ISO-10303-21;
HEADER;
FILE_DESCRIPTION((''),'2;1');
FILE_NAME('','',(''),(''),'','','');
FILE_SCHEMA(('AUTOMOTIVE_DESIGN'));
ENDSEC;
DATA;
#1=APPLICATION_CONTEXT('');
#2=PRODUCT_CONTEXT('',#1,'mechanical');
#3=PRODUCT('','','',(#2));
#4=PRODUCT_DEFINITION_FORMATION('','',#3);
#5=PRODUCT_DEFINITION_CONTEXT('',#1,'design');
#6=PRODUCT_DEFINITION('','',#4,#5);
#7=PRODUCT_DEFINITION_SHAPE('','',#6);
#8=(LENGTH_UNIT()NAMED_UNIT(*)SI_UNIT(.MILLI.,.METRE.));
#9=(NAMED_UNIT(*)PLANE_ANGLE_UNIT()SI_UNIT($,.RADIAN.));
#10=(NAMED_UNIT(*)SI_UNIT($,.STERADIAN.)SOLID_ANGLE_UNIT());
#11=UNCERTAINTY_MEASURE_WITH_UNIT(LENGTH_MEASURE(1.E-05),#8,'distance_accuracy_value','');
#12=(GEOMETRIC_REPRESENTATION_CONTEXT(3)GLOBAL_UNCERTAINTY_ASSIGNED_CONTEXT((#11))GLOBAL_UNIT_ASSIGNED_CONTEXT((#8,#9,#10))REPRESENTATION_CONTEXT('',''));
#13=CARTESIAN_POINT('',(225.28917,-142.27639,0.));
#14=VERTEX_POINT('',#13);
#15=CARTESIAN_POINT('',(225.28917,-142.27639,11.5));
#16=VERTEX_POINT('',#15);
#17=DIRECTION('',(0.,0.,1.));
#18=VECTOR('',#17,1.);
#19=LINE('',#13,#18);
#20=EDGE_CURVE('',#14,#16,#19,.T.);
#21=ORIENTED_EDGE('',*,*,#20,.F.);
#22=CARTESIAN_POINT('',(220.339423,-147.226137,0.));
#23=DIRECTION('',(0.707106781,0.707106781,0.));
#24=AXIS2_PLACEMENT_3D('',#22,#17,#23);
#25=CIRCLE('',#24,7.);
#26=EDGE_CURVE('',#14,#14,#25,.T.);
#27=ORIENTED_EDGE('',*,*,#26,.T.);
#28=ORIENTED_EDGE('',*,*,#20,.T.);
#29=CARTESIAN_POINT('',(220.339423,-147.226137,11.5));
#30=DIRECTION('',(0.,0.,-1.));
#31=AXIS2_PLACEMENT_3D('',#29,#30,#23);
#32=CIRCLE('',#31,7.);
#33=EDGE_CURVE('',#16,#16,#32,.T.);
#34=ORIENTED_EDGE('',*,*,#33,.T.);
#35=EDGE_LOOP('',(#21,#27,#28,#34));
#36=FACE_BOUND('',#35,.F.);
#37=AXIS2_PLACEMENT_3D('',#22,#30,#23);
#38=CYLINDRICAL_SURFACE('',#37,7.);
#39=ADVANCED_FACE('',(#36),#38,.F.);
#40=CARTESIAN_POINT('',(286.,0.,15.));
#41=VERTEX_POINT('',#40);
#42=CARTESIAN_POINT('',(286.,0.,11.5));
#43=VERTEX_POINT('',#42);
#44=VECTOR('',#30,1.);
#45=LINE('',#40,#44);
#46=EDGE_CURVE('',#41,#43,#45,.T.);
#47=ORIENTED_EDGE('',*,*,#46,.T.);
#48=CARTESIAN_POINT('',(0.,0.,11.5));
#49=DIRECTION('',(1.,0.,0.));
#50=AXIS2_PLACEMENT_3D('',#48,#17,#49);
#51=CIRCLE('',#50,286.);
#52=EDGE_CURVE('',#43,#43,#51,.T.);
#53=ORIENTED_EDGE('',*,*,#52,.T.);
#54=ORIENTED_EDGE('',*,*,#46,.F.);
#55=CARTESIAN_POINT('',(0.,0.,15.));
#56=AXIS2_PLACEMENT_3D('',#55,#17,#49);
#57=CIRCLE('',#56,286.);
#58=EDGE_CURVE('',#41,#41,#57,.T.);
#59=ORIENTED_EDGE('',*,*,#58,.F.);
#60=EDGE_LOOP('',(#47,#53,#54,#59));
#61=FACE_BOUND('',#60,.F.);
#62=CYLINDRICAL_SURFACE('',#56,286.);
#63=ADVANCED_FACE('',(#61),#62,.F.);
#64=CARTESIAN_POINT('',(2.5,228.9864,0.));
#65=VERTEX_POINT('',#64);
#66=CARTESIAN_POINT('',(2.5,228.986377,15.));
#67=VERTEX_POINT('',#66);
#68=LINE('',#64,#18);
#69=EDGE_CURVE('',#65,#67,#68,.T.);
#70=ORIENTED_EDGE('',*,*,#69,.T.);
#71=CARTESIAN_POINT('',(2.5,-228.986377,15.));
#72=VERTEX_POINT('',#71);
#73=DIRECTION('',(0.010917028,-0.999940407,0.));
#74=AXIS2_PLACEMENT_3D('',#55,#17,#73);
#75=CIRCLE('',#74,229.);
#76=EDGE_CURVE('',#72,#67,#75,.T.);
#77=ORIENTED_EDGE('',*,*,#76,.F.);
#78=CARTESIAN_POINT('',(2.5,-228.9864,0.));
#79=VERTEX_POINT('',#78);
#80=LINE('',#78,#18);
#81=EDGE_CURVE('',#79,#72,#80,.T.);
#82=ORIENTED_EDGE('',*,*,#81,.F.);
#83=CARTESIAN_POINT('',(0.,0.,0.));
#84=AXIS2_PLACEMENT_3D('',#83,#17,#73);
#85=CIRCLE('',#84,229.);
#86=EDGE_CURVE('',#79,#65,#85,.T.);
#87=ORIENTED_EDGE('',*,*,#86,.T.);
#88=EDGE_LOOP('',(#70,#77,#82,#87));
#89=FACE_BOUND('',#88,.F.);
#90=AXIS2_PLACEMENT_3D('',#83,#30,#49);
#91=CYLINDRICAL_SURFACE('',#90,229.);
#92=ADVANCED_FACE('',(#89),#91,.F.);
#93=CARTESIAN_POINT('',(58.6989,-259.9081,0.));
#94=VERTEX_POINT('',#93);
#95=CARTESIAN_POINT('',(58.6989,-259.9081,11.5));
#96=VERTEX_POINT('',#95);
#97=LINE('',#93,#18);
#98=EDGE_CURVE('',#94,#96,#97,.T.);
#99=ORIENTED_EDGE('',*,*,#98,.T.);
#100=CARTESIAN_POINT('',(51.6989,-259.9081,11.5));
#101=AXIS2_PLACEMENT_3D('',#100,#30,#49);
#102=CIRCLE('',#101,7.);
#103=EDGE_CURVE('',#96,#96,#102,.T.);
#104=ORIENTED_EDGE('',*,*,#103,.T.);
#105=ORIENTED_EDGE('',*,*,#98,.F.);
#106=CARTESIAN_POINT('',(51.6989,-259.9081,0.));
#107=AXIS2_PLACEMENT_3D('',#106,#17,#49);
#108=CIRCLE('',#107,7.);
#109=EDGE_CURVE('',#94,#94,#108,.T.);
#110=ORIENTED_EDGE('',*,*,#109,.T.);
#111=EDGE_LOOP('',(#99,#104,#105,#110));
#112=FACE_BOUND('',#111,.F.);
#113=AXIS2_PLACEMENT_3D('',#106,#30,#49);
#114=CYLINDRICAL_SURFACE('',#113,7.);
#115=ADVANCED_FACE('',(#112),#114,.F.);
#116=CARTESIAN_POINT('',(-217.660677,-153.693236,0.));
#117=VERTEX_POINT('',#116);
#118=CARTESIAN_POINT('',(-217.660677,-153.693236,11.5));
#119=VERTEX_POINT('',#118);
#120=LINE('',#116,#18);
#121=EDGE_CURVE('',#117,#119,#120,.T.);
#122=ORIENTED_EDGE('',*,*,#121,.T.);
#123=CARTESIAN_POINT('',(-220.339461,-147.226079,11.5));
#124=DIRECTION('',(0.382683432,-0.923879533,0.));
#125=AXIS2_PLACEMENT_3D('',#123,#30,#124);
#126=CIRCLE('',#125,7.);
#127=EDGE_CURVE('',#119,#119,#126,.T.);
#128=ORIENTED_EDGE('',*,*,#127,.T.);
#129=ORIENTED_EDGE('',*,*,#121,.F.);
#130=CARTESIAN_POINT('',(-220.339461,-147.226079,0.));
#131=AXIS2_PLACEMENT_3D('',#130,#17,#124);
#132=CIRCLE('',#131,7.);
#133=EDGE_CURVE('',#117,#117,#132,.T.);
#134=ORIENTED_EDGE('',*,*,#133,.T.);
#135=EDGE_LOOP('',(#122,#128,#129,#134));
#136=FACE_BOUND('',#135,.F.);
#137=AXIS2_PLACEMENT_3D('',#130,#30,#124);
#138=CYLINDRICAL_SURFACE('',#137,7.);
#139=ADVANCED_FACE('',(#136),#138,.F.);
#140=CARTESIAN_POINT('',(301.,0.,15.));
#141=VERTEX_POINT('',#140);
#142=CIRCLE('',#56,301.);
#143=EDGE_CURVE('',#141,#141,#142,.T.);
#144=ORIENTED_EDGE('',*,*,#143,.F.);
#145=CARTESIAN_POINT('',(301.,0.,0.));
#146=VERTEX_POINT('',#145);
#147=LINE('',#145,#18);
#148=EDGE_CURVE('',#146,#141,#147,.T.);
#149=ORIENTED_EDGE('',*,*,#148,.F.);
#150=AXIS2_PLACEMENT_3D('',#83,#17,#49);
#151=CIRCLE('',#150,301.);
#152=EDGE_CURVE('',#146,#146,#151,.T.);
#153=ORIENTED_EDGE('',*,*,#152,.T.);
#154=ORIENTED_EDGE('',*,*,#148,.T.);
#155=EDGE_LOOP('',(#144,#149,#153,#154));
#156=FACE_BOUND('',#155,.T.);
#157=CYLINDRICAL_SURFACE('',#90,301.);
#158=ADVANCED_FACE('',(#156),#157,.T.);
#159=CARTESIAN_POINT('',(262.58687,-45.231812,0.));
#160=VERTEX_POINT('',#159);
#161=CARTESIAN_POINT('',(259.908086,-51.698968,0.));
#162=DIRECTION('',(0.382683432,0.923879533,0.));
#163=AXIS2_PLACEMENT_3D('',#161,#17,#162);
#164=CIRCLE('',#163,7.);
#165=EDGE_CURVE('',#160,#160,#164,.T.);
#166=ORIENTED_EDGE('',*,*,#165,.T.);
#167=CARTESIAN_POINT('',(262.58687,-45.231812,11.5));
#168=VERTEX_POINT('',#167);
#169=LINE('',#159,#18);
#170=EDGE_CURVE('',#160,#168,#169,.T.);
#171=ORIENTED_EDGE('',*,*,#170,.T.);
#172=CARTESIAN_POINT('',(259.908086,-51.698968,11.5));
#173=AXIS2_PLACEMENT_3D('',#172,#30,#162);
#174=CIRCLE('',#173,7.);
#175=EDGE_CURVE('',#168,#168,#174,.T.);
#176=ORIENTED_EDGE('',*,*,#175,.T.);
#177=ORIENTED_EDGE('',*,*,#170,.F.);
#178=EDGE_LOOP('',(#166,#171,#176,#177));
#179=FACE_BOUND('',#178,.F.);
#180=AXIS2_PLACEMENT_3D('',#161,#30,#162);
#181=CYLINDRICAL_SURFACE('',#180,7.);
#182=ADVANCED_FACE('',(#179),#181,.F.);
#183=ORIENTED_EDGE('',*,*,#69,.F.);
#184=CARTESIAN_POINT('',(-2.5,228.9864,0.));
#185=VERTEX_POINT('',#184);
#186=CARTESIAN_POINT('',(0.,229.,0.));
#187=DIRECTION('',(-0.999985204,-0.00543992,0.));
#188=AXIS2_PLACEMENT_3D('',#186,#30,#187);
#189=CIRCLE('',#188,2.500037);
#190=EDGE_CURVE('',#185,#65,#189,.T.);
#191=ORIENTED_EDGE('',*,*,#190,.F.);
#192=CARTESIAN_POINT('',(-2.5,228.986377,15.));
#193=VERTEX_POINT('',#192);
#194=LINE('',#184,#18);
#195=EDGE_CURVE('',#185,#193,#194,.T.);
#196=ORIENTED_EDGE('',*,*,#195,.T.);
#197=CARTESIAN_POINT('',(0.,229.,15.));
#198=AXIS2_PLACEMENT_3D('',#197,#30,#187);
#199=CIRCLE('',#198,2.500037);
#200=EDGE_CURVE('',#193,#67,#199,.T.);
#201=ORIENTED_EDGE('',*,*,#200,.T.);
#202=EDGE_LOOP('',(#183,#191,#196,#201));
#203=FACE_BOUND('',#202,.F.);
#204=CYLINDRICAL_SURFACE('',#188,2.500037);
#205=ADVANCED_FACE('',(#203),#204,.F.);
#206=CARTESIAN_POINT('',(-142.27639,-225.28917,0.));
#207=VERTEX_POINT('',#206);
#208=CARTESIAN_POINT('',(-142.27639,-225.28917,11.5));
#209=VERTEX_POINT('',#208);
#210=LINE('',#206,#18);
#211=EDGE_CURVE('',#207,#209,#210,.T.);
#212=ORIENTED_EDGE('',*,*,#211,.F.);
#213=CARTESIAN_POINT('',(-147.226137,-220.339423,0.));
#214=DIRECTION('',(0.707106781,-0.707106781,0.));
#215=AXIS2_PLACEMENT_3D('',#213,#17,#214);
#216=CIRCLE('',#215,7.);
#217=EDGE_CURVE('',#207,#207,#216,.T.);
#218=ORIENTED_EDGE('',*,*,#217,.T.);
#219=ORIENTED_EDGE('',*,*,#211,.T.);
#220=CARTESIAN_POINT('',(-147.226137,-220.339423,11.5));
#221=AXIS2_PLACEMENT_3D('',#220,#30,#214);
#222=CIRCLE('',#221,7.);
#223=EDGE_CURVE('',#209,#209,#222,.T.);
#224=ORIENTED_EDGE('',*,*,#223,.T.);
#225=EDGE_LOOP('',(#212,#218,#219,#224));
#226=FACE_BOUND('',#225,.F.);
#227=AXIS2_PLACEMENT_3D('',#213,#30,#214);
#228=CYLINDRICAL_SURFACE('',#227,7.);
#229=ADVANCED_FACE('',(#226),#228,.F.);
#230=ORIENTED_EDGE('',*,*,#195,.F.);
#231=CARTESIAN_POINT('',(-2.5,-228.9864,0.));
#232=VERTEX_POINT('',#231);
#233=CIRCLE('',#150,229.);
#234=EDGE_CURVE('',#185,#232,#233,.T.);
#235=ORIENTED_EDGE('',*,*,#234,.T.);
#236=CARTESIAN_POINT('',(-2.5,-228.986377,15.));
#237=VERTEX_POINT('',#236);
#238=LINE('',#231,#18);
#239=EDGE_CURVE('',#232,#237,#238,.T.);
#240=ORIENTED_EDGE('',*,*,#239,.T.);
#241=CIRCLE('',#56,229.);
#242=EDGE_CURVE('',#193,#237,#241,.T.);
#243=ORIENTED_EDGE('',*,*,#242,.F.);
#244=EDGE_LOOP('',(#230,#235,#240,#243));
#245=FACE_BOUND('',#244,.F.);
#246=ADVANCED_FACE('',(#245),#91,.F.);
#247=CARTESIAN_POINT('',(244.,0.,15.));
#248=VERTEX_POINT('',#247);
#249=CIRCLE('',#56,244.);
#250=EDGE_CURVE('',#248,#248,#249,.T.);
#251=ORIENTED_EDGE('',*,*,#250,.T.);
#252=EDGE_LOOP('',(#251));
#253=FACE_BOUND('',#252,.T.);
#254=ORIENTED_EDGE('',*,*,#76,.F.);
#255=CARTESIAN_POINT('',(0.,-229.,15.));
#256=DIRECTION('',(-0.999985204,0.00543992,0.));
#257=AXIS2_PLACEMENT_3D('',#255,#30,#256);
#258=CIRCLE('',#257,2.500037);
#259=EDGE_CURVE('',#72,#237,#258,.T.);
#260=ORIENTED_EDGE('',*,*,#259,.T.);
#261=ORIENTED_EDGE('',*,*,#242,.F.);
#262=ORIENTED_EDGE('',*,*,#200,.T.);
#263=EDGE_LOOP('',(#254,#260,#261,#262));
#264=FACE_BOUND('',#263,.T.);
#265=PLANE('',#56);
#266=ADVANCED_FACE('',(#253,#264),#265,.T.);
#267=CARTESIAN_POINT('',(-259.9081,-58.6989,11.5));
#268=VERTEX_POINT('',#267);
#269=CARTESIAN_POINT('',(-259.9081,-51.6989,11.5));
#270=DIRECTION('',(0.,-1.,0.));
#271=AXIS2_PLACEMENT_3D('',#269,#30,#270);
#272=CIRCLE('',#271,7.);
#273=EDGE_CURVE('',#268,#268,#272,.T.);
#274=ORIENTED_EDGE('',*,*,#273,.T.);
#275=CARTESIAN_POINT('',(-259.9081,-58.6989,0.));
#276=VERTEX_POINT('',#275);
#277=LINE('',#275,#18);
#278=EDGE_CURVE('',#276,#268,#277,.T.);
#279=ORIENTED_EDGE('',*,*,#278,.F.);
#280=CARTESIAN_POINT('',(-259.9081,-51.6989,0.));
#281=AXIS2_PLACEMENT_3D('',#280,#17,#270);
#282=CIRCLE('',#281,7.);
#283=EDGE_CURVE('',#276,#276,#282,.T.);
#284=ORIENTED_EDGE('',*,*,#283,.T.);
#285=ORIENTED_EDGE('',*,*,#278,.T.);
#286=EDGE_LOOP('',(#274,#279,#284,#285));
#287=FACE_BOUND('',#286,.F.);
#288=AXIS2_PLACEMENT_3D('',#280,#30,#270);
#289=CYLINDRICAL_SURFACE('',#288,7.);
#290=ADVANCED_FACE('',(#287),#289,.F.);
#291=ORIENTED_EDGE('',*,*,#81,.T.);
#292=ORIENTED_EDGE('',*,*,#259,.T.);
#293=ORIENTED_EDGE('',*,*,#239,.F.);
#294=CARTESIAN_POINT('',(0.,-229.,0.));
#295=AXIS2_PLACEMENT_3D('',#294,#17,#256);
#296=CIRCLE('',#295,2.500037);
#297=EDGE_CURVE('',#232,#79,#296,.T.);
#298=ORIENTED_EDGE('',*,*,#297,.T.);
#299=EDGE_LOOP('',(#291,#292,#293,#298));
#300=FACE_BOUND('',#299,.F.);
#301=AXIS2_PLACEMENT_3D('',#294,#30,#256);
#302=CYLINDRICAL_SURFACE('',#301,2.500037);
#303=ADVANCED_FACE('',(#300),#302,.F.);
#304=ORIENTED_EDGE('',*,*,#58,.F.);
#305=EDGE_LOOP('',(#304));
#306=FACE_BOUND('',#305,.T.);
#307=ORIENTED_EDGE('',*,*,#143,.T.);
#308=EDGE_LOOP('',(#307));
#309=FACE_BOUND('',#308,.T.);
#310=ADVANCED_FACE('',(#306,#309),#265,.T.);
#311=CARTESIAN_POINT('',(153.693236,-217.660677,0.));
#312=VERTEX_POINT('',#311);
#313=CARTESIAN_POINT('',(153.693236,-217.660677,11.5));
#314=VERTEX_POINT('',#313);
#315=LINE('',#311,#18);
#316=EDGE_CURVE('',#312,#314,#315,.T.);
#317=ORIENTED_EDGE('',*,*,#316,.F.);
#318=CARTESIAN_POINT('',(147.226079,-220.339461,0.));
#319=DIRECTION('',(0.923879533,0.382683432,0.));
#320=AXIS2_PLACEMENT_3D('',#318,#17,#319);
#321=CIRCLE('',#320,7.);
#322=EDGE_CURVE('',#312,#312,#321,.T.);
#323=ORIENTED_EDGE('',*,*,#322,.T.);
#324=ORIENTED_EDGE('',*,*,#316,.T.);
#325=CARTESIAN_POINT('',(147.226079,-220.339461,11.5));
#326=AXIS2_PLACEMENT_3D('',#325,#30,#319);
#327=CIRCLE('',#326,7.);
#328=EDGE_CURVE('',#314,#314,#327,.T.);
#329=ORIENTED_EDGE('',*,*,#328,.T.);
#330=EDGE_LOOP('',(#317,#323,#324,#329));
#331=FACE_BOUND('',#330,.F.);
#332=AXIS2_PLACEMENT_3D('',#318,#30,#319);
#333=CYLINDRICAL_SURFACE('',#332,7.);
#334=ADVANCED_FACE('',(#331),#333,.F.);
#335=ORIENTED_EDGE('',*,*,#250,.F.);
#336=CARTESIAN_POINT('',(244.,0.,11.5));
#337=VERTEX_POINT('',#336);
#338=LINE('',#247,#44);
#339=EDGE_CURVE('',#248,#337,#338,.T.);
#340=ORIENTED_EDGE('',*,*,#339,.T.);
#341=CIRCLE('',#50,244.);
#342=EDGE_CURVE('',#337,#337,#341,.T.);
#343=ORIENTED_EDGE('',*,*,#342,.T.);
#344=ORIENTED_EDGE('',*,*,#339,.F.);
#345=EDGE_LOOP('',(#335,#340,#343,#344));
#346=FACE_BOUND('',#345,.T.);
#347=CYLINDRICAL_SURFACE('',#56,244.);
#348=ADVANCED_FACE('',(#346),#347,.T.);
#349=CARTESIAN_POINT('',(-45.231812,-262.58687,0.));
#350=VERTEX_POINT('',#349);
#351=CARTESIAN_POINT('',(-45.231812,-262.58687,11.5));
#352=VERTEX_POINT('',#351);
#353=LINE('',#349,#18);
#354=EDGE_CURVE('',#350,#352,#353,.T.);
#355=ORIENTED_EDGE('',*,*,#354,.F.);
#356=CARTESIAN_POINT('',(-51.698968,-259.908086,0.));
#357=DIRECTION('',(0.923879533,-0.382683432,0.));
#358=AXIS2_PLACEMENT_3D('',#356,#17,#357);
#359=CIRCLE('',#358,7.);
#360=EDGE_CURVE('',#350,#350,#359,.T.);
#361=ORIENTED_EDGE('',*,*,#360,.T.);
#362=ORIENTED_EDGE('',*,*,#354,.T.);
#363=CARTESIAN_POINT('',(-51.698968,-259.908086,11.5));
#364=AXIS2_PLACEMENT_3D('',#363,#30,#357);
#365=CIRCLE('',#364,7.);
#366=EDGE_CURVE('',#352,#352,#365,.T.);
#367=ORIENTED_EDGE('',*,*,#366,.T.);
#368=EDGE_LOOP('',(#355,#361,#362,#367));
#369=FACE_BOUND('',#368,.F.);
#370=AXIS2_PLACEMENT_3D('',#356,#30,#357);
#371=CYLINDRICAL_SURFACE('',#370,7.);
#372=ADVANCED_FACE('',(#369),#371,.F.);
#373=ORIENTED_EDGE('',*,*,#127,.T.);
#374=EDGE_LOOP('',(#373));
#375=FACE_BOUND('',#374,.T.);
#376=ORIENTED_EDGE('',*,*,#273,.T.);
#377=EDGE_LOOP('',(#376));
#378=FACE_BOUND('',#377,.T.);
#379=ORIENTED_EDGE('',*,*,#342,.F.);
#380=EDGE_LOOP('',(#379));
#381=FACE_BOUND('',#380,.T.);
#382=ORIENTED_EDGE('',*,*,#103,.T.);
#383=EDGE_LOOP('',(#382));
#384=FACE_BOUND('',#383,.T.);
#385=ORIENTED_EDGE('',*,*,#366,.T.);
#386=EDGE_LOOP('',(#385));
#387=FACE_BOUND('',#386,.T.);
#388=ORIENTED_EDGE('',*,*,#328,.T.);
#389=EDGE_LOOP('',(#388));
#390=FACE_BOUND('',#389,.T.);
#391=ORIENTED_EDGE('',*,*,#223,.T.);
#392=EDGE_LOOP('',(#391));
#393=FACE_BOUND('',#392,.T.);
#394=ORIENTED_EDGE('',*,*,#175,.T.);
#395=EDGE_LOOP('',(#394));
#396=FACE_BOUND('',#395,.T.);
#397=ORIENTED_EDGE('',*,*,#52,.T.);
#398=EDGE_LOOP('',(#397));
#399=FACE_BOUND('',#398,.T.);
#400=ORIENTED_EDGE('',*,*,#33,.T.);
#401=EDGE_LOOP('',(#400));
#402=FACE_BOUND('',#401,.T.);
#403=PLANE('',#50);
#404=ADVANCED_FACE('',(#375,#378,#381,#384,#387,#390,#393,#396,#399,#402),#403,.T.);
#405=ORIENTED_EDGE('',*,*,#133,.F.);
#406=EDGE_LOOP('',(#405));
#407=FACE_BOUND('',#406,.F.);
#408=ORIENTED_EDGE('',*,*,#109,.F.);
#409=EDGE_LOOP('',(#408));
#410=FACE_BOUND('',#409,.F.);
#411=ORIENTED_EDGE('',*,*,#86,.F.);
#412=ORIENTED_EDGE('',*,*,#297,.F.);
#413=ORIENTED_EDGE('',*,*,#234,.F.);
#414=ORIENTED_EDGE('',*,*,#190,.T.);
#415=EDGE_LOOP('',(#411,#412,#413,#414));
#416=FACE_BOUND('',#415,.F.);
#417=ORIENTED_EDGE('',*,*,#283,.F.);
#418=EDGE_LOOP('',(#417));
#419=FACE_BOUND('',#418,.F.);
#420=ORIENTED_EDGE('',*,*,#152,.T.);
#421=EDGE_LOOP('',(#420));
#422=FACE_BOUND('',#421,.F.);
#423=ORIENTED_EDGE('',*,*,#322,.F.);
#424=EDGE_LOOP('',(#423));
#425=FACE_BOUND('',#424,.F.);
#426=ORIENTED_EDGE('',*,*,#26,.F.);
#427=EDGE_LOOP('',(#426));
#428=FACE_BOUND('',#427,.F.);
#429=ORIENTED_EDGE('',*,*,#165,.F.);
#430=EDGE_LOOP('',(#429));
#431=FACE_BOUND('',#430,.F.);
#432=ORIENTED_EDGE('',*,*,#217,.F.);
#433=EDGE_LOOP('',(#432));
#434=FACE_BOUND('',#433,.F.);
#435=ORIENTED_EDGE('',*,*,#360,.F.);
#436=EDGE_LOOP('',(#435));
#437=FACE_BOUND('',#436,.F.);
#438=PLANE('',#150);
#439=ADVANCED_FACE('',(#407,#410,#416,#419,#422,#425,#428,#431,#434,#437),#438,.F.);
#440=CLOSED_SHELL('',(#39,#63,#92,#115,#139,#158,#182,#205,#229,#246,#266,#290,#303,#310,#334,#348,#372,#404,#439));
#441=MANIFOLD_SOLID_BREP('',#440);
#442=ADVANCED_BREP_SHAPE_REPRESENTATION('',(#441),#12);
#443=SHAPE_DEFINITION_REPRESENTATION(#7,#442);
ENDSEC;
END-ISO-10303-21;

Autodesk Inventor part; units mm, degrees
ref_plane "YZ Plane" through (0, 0, 0) normal (1, 0, 0) x (0, 1, 0)
ref_plane "XZ Plane" through (0, 0, 0) normal (0, 1, 0) x (-1, 0, 0)
ref_plane "XY Plane" through (0, 0, 0) normal (0, 0, 1) x (1, 0, 0)
sketch "Sketch1" plane through (0, 0, 0) normal (0, 0, 1) x (1, 0, 0)
  circle A0 centre (0, 0) radius 229
  circle A1 centre (0, 0) radius 301
  circle A2 centre (0, 0) radius 265 construction
  line L0 (0, 229) -> (0, 301) construction
  point P0 (0, 265)
  dimension "d17" = 530
  dimension "d18" = 72
extrude "Extrusion1" add sketch "Sketch1" along normal blind 15
sketch "Sketch2" plane through (0, 0, 15) normal (0, 0, 1) x (1, 0, 0)
  circle A0 centre (0, 0) radius 301 construction
  circle A1 centre (0, 0) radius 229 construction
  line L0 (0, 286) -> (0, 244) construction
  line L1 (0, 229) -> (0, 0) construction
  circle A2 centre (0, 0) radius 244
  circle A3 centre (0, 0) radius 286
  circle A4 centre (0, 0) radius 265 construction
  point P0 (0, 265)
  dimension "d19" = 530
  dimension "d4" = 42
extrude "Extrusion2" cut sketch "Sketch2" against normal blind 3.5
sketch "Sketch3" plane through (0, 0, 0) normal (0, 0, 1) x (1, 0, 0)
  circle A0 centre (0, 0) radius 229 construction
  circle A1 centre (0, 0) radius 301 construction
  circle A2 centre (0, 0) radius 244 projected
  circle A3 centre (0, 0) radius 286 projected
  circle A4 centre (0, 0) radius 301 projected
  line L0 (0, 0) -> (0, -301) construction
  line L1 (0, 0) -> (58.7222, -295.2164) construction
  line L2 (47.602, -239.3116) -> (55.7958, -280.5046) construction
  circle A5 centre (51.6989, -259.9081) radius 7
  dimension "d20" = 11.25
  dimension "d21" = 14
extrude "Extrusion3" cut sketch "Sketch3" along normal through all contours A5
pattern_circular "Circular Pattern2" count 8 over 157.5 about axis through (0, 0, 0) along (0, 0, -1) of "Extrusion3" both ways yes
sketch "Sketch5" plane through (0, 0, 0) normal (0, 0, -1) x (-1, 0, 0)
  circle A0 centre (0, 0) radius 301 projected
  circle A1 centre (0, 0) radius 229 projected
  line L0 (0, 0) -> (0, 229) construction
  arc A2 (2.5, 228.9864) -> (-2.5, 228.9864) centre (0, 229) ccw
  dimension "d40" = 5
extrude "Extrusion4" cut sketch "Sketch5" against normal through all contours A1 A2
mirror "Mirror1" about plane through (0, 0, 0) normal (0, 1, 0) of "Extrusion4"
equation "\"d17\" = Шпил_пласт_КОРМА_диам_центров"
equation "\"d19\" = Шпил_пласт_КОРМА_диам_центров"
equation "\"BendReliefDepth\" = 0.5 * Thickness"
equation "\"Шпил_пласт_КОРМА_диам_центров\" = 530"
equation "\"Thickness\" = 10"
properties part number "ДМС 021 кольцо прижимное корма"
